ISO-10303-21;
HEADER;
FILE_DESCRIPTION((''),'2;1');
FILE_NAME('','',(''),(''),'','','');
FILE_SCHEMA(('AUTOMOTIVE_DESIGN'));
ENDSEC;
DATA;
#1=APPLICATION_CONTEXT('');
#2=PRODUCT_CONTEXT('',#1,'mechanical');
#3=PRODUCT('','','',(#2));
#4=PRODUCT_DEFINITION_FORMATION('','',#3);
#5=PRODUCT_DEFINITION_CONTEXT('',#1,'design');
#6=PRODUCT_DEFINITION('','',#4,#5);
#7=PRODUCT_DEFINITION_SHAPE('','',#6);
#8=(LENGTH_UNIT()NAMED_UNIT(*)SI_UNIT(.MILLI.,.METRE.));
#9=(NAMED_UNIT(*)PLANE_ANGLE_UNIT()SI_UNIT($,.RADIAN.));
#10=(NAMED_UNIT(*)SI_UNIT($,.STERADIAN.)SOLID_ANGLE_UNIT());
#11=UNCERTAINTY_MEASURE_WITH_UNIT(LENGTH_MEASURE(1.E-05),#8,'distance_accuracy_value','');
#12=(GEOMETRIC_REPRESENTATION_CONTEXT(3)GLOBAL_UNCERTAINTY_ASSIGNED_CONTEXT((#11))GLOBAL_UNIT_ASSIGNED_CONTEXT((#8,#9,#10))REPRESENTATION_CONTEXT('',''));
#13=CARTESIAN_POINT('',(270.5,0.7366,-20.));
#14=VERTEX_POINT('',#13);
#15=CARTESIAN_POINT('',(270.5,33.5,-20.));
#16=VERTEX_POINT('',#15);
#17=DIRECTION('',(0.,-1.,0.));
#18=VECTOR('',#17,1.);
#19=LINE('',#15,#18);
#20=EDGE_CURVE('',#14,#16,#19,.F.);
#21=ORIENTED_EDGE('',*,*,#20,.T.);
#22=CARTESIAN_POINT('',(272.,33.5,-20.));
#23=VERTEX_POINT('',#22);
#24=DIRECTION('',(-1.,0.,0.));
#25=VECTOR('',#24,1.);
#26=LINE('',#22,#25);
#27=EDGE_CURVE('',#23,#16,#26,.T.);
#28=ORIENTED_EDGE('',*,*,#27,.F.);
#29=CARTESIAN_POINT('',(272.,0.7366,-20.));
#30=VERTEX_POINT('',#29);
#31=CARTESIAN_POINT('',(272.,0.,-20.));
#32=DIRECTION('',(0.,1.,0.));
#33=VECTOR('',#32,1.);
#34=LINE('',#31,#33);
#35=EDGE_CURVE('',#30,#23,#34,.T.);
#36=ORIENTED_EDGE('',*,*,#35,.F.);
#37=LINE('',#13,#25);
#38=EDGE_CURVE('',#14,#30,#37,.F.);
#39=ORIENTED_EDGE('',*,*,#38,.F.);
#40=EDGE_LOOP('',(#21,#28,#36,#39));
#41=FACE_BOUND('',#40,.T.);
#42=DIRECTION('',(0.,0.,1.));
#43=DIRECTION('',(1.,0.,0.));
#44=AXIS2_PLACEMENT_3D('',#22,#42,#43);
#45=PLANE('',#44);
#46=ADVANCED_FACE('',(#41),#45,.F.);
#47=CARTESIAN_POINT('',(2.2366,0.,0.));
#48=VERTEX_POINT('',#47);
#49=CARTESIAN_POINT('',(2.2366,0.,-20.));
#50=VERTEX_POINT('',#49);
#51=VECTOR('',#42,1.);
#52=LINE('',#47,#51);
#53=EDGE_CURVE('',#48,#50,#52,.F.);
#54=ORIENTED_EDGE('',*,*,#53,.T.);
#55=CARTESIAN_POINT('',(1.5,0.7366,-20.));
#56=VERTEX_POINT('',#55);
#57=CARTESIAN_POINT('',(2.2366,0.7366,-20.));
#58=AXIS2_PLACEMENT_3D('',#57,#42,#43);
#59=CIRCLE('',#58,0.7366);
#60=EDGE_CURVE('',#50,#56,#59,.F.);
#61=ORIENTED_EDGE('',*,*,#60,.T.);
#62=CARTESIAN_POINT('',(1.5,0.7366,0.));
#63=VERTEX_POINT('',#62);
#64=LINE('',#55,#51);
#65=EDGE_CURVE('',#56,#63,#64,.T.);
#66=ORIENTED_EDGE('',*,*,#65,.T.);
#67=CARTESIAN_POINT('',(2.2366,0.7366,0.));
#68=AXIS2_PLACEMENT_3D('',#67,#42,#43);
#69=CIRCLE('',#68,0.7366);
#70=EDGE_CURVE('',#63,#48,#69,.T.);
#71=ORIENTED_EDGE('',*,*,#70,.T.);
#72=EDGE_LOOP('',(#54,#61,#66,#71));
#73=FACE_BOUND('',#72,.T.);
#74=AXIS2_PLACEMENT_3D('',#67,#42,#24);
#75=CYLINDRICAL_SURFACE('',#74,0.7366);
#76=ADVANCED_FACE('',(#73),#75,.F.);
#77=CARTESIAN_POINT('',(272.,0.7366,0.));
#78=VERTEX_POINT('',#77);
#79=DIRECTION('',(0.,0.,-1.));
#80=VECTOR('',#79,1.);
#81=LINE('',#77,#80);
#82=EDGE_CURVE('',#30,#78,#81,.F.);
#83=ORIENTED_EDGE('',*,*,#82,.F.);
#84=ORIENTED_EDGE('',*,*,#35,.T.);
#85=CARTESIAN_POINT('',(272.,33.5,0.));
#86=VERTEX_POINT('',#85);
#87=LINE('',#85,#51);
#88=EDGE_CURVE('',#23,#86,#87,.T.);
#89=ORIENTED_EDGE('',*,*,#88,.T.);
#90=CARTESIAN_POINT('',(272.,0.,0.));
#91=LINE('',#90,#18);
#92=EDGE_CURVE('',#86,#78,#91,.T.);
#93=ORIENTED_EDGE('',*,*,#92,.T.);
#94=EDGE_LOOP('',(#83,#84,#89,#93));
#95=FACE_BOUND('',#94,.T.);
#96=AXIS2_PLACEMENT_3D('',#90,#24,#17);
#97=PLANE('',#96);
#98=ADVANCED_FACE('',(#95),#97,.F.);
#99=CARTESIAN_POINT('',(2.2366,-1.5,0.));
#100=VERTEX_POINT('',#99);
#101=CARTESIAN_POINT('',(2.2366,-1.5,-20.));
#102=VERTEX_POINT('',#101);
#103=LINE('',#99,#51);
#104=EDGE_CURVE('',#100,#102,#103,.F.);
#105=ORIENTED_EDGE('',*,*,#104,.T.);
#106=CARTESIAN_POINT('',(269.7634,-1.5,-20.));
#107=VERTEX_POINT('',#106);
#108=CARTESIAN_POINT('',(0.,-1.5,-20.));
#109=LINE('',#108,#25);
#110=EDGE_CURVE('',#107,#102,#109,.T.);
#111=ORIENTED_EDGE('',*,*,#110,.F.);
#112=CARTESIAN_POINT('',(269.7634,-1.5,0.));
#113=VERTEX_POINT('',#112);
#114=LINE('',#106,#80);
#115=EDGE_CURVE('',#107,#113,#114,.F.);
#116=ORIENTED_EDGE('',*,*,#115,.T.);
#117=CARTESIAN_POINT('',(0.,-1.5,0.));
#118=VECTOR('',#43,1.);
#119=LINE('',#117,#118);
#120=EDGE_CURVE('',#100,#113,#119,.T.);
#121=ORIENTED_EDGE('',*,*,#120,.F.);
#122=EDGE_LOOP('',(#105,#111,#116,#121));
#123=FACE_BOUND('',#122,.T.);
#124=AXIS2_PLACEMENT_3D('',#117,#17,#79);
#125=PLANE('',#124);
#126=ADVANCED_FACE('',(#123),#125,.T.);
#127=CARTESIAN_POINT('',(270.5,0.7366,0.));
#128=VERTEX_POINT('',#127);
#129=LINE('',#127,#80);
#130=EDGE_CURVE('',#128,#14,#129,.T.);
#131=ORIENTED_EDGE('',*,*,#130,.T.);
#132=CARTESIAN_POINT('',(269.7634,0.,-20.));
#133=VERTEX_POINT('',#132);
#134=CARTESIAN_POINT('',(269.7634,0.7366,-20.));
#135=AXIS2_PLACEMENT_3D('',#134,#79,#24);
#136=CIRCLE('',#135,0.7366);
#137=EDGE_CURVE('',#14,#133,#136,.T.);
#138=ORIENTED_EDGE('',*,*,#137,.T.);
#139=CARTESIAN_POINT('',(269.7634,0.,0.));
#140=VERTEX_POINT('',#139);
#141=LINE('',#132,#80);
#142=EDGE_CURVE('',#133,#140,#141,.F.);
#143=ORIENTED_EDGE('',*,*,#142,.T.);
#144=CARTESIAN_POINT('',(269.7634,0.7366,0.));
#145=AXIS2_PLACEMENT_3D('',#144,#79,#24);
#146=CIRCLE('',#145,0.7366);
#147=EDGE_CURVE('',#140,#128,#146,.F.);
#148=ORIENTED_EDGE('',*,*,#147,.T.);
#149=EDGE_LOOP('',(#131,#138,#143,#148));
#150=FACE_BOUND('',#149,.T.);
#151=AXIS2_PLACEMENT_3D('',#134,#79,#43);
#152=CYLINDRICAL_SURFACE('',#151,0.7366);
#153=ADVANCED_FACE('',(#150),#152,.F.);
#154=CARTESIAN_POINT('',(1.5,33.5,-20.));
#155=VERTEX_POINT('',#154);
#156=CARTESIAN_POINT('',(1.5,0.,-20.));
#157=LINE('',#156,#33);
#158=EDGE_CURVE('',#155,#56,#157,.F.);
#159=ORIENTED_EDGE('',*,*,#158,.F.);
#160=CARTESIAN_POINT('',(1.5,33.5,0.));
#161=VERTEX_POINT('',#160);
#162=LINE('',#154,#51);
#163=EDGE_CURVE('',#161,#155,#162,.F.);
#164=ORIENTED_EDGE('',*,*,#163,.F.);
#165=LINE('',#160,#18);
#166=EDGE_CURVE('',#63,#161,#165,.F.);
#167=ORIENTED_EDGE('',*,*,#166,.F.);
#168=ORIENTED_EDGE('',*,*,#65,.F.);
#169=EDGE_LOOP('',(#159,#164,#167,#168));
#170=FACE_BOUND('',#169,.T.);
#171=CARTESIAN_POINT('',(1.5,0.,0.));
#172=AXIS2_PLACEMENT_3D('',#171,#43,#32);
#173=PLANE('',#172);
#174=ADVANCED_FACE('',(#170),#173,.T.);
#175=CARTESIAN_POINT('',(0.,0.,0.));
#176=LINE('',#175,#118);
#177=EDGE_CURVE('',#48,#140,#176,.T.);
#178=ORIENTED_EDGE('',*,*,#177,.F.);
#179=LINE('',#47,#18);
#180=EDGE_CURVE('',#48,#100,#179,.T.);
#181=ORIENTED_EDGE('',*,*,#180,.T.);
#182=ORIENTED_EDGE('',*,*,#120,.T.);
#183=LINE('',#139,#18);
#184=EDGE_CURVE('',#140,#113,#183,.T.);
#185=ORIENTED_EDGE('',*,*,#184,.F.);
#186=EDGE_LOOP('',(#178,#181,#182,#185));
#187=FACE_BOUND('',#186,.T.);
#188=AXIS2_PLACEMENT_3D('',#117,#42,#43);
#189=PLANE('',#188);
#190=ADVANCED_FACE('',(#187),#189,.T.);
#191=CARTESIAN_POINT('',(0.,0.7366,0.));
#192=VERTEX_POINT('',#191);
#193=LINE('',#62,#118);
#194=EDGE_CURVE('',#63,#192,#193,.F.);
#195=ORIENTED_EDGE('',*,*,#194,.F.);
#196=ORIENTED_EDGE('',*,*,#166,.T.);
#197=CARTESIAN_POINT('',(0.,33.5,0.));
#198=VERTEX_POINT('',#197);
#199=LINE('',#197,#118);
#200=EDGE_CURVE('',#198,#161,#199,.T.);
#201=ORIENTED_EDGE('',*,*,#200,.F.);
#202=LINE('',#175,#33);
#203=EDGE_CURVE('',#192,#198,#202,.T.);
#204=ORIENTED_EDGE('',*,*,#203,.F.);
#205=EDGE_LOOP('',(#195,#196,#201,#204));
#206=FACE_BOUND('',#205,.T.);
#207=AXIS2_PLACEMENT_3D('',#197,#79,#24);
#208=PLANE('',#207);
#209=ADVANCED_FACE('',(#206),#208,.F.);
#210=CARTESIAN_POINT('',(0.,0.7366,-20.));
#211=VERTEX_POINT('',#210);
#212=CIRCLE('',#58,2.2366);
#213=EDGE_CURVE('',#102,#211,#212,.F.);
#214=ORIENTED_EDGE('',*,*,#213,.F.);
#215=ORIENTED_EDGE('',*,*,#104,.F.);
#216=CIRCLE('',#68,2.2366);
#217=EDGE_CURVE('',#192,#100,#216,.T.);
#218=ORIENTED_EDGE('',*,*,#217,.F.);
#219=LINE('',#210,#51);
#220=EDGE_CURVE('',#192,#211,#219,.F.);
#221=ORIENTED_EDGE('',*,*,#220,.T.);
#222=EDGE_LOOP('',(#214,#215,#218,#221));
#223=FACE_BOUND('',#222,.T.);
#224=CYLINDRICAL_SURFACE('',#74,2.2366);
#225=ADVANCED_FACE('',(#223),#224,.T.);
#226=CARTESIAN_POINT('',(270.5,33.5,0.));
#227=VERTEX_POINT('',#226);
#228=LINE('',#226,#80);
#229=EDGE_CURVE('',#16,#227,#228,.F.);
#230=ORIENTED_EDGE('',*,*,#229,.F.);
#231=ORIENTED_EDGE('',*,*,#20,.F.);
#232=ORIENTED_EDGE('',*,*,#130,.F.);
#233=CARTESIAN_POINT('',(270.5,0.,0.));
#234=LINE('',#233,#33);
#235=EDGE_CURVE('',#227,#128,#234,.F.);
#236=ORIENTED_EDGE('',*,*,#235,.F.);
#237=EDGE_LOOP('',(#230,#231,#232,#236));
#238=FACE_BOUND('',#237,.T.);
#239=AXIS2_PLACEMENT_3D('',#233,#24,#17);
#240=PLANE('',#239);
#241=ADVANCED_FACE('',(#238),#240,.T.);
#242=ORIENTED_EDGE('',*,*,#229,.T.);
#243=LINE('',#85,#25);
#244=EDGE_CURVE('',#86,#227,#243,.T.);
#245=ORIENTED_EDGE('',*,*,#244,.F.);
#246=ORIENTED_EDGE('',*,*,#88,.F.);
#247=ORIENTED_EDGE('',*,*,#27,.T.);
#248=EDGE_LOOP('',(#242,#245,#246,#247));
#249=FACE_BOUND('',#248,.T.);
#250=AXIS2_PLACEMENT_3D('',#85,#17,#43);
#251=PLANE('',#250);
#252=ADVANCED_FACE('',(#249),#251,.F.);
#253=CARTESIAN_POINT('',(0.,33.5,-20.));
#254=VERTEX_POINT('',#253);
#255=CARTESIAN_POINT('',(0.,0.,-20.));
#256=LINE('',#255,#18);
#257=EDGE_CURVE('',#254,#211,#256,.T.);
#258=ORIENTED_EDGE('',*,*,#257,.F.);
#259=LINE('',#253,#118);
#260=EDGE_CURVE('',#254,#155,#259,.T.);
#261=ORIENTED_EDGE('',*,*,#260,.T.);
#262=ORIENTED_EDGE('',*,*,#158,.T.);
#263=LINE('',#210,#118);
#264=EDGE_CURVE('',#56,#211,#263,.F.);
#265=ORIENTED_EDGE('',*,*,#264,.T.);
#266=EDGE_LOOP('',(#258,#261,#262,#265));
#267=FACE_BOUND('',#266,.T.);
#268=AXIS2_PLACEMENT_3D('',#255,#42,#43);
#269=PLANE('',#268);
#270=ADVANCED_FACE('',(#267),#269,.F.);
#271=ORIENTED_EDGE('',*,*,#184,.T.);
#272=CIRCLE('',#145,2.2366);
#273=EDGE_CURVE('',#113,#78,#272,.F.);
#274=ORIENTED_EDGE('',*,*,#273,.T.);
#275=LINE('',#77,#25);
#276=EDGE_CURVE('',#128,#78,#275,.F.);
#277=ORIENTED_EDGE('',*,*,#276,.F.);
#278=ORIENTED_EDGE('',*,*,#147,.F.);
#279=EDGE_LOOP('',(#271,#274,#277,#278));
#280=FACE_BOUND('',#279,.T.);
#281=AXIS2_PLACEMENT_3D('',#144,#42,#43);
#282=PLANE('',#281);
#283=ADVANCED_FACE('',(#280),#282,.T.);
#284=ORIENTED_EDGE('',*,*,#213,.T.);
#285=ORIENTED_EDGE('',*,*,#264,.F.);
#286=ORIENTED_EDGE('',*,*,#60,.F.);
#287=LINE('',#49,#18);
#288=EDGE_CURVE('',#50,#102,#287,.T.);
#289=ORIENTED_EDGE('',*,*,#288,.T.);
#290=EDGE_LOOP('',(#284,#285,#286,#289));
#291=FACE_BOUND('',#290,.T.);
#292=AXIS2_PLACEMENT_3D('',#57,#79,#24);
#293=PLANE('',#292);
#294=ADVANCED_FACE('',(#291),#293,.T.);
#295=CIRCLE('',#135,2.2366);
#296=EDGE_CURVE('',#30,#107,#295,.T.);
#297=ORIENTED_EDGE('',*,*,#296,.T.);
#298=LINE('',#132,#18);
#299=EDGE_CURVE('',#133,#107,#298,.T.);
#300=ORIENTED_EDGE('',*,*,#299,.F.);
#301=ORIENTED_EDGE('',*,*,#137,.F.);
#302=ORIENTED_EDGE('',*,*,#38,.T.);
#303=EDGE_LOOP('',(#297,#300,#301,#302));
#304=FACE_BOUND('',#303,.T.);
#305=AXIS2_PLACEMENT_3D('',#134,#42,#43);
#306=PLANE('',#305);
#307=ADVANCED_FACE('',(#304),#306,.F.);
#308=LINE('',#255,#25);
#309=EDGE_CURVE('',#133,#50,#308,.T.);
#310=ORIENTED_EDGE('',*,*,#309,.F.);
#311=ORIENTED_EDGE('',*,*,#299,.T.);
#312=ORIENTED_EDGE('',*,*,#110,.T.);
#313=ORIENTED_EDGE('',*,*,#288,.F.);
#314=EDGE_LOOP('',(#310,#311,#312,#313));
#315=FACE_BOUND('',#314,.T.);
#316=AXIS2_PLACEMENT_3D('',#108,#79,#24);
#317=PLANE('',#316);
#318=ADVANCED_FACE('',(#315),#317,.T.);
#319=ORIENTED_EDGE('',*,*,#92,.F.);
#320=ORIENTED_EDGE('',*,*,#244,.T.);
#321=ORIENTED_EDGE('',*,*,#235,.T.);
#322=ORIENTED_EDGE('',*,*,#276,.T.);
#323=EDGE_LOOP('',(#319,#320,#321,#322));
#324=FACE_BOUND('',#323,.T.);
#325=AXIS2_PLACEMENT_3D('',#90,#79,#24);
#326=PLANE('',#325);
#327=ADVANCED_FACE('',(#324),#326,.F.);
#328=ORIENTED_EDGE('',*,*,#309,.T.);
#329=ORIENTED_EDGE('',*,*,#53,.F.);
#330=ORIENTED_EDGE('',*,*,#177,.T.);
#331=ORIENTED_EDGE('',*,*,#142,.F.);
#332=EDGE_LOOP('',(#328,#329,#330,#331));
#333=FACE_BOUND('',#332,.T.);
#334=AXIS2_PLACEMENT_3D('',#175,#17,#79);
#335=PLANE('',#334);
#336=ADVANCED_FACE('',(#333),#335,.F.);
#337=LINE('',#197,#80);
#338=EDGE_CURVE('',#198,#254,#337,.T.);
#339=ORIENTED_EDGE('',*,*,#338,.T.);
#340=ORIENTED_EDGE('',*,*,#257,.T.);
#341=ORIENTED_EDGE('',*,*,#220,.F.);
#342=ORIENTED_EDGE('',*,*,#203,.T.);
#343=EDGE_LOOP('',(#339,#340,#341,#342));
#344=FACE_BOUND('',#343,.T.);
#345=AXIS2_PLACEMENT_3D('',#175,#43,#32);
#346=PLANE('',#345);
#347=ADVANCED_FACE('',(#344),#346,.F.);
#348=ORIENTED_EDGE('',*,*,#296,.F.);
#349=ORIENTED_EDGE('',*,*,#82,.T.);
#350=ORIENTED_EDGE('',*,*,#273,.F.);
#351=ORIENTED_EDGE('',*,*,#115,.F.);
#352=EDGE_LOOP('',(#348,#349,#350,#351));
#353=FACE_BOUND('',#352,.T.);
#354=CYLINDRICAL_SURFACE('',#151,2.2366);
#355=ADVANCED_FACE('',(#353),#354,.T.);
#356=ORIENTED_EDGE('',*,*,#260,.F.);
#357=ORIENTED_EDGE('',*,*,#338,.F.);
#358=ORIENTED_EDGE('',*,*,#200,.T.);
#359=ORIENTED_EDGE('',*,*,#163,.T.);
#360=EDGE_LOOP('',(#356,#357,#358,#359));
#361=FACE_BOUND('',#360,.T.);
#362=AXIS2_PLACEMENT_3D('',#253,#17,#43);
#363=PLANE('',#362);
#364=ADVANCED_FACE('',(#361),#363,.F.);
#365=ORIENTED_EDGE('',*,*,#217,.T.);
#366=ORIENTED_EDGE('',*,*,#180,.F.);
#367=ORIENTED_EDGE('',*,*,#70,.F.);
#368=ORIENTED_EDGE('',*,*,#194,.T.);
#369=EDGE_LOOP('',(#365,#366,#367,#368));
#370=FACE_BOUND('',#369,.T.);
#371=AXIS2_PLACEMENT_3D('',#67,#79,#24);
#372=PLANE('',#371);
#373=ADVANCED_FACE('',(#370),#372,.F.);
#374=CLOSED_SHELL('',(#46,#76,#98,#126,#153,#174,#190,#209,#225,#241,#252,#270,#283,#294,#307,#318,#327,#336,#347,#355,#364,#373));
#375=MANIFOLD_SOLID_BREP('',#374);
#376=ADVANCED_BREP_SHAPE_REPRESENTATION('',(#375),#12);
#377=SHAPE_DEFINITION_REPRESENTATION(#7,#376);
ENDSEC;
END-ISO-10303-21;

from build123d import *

# Parameters (mm, degrees)
SKETCH_1_W                       = 272
SKETCH_1_H                       = 20
SM_BASE_FLANGE_1_DEPTH           = 1.5
SM_EDGE_FLANGE_1_STRIP_W         = 7.4732
SM_EDGE_FLANGE_1_STRIP_H         = 1.5
SM_EDGE_FLANGE_1_STRIP_CUT_DEPTH = 20
SM_EDGE_FLANGE_1_DEPTH           = 20
SM_EDGE_FLANGE_2_STRIP_W         = 7.4732
SM_EDGE_FLANGE_2_STRIP_H         = 1.5
SM_EDGE_FLANGE_2_STRIP_CUT_DEPTH = 20
SM_EDGE_FLANGE_2_DEPTH           = 20


# Sheet-metal steps are written as plain solids
with BuildPart() as part:
    # Sketch 1 → Базовая кромка1 (new body)
    with BuildSketch(Plane(origin=(0, 0, 0), x_dir=(1, 0, 0), z_dir=(0, 1, 0))):
        with Locations((136, 10)):
            Rectangle(SKETCH_1_W, SKETCH_1_H)
    extrude(amount=-SM_BASE_FLANGE_1_DEPTH)

    # Ребро-кромка1 strip (across the edge) → Ребро-кромка1 strip cut (cut)
    with BuildSketch(Plane.XY.offset(-20)):
        with Locations((-1.5, -0.75)):
            Rectangle(SM_EDGE_FLANGE_1_STRIP_W, SM_EDGE_FLANGE_1_STRIP_H)
    extrude(amount=SM_EDGE_FLANGE_1_STRIP_CUT_DEPTH, mode=Mode.SUBTRACT)

    # Ребро-кромка1 section (across the edge) → Ребро-кромка1 (add)
    with BuildSketch(Plane.XY.offset(-20)):
        with BuildLine():
            Line((0, 0.7366), (0, 33.5))
            Line((0, 33.5), (1.5, 33.5))
            Line((1.5, 33.5), (1.5, 0.7366))
            ThreePointArc((1.5, 0.7366), (1.715745145, 0.215745145), (2.2366, 0))
            Line((2.2366, 0), (2.2366, -1.5))
            ThreePointArc((2.2366, -1.5), (0.655084973, -0.844915027), (0, 0.7366))
        make_face()
    extrude(amount=SM_EDGE_FLANGE_1_DEPTH)

    # Ребро-кромка2 strip (across the edge) → Ребро-кромка2 strip cut (cut)
    with BuildSketch(Plane(origin=(272, 0, 0), x_dir=(-1, 0, 0), z_dir=(0, 0, -1))):
        with Locations((-1.5, -0.75)):
            Rectangle(SM_EDGE_FLANGE_2_STRIP_W, SM_EDGE_FLANGE_2_STRIP_H)
    extrude(amount=SM_EDGE_FLANGE_2_STRIP_CUT_DEPTH, mode=Mode.SUBTRACT)

    # Ребро-кромка2 section (across the edge) → Ребро-кромка2 (add)
    with BuildSketch(Plane(origin=(272, 0, 0), x_dir=(-1, 0, 0), z_dir=(0, 0, -1))):
        with BuildLine():
            Line((0, 0.7366), (0, 33.5))
            Line((0, 33.5), (1.5, 33.5))
            Line((1.5, 33.5), (1.5, 0.7366))
            ThreePointArc((1.5, 0.7366), (1.715745145, 0.215745145), (2.2366, 0))
            Line((2.2366, 0), (2.2366, -1.5))
            ThreePointArc((2.2366, -1.5), (0.655084973, -0.844915027), (0, 0.7366))
        make_face()
    extrude(amount=SM_EDGE_FLANGE_2_DEPTH)


solid = part.part
